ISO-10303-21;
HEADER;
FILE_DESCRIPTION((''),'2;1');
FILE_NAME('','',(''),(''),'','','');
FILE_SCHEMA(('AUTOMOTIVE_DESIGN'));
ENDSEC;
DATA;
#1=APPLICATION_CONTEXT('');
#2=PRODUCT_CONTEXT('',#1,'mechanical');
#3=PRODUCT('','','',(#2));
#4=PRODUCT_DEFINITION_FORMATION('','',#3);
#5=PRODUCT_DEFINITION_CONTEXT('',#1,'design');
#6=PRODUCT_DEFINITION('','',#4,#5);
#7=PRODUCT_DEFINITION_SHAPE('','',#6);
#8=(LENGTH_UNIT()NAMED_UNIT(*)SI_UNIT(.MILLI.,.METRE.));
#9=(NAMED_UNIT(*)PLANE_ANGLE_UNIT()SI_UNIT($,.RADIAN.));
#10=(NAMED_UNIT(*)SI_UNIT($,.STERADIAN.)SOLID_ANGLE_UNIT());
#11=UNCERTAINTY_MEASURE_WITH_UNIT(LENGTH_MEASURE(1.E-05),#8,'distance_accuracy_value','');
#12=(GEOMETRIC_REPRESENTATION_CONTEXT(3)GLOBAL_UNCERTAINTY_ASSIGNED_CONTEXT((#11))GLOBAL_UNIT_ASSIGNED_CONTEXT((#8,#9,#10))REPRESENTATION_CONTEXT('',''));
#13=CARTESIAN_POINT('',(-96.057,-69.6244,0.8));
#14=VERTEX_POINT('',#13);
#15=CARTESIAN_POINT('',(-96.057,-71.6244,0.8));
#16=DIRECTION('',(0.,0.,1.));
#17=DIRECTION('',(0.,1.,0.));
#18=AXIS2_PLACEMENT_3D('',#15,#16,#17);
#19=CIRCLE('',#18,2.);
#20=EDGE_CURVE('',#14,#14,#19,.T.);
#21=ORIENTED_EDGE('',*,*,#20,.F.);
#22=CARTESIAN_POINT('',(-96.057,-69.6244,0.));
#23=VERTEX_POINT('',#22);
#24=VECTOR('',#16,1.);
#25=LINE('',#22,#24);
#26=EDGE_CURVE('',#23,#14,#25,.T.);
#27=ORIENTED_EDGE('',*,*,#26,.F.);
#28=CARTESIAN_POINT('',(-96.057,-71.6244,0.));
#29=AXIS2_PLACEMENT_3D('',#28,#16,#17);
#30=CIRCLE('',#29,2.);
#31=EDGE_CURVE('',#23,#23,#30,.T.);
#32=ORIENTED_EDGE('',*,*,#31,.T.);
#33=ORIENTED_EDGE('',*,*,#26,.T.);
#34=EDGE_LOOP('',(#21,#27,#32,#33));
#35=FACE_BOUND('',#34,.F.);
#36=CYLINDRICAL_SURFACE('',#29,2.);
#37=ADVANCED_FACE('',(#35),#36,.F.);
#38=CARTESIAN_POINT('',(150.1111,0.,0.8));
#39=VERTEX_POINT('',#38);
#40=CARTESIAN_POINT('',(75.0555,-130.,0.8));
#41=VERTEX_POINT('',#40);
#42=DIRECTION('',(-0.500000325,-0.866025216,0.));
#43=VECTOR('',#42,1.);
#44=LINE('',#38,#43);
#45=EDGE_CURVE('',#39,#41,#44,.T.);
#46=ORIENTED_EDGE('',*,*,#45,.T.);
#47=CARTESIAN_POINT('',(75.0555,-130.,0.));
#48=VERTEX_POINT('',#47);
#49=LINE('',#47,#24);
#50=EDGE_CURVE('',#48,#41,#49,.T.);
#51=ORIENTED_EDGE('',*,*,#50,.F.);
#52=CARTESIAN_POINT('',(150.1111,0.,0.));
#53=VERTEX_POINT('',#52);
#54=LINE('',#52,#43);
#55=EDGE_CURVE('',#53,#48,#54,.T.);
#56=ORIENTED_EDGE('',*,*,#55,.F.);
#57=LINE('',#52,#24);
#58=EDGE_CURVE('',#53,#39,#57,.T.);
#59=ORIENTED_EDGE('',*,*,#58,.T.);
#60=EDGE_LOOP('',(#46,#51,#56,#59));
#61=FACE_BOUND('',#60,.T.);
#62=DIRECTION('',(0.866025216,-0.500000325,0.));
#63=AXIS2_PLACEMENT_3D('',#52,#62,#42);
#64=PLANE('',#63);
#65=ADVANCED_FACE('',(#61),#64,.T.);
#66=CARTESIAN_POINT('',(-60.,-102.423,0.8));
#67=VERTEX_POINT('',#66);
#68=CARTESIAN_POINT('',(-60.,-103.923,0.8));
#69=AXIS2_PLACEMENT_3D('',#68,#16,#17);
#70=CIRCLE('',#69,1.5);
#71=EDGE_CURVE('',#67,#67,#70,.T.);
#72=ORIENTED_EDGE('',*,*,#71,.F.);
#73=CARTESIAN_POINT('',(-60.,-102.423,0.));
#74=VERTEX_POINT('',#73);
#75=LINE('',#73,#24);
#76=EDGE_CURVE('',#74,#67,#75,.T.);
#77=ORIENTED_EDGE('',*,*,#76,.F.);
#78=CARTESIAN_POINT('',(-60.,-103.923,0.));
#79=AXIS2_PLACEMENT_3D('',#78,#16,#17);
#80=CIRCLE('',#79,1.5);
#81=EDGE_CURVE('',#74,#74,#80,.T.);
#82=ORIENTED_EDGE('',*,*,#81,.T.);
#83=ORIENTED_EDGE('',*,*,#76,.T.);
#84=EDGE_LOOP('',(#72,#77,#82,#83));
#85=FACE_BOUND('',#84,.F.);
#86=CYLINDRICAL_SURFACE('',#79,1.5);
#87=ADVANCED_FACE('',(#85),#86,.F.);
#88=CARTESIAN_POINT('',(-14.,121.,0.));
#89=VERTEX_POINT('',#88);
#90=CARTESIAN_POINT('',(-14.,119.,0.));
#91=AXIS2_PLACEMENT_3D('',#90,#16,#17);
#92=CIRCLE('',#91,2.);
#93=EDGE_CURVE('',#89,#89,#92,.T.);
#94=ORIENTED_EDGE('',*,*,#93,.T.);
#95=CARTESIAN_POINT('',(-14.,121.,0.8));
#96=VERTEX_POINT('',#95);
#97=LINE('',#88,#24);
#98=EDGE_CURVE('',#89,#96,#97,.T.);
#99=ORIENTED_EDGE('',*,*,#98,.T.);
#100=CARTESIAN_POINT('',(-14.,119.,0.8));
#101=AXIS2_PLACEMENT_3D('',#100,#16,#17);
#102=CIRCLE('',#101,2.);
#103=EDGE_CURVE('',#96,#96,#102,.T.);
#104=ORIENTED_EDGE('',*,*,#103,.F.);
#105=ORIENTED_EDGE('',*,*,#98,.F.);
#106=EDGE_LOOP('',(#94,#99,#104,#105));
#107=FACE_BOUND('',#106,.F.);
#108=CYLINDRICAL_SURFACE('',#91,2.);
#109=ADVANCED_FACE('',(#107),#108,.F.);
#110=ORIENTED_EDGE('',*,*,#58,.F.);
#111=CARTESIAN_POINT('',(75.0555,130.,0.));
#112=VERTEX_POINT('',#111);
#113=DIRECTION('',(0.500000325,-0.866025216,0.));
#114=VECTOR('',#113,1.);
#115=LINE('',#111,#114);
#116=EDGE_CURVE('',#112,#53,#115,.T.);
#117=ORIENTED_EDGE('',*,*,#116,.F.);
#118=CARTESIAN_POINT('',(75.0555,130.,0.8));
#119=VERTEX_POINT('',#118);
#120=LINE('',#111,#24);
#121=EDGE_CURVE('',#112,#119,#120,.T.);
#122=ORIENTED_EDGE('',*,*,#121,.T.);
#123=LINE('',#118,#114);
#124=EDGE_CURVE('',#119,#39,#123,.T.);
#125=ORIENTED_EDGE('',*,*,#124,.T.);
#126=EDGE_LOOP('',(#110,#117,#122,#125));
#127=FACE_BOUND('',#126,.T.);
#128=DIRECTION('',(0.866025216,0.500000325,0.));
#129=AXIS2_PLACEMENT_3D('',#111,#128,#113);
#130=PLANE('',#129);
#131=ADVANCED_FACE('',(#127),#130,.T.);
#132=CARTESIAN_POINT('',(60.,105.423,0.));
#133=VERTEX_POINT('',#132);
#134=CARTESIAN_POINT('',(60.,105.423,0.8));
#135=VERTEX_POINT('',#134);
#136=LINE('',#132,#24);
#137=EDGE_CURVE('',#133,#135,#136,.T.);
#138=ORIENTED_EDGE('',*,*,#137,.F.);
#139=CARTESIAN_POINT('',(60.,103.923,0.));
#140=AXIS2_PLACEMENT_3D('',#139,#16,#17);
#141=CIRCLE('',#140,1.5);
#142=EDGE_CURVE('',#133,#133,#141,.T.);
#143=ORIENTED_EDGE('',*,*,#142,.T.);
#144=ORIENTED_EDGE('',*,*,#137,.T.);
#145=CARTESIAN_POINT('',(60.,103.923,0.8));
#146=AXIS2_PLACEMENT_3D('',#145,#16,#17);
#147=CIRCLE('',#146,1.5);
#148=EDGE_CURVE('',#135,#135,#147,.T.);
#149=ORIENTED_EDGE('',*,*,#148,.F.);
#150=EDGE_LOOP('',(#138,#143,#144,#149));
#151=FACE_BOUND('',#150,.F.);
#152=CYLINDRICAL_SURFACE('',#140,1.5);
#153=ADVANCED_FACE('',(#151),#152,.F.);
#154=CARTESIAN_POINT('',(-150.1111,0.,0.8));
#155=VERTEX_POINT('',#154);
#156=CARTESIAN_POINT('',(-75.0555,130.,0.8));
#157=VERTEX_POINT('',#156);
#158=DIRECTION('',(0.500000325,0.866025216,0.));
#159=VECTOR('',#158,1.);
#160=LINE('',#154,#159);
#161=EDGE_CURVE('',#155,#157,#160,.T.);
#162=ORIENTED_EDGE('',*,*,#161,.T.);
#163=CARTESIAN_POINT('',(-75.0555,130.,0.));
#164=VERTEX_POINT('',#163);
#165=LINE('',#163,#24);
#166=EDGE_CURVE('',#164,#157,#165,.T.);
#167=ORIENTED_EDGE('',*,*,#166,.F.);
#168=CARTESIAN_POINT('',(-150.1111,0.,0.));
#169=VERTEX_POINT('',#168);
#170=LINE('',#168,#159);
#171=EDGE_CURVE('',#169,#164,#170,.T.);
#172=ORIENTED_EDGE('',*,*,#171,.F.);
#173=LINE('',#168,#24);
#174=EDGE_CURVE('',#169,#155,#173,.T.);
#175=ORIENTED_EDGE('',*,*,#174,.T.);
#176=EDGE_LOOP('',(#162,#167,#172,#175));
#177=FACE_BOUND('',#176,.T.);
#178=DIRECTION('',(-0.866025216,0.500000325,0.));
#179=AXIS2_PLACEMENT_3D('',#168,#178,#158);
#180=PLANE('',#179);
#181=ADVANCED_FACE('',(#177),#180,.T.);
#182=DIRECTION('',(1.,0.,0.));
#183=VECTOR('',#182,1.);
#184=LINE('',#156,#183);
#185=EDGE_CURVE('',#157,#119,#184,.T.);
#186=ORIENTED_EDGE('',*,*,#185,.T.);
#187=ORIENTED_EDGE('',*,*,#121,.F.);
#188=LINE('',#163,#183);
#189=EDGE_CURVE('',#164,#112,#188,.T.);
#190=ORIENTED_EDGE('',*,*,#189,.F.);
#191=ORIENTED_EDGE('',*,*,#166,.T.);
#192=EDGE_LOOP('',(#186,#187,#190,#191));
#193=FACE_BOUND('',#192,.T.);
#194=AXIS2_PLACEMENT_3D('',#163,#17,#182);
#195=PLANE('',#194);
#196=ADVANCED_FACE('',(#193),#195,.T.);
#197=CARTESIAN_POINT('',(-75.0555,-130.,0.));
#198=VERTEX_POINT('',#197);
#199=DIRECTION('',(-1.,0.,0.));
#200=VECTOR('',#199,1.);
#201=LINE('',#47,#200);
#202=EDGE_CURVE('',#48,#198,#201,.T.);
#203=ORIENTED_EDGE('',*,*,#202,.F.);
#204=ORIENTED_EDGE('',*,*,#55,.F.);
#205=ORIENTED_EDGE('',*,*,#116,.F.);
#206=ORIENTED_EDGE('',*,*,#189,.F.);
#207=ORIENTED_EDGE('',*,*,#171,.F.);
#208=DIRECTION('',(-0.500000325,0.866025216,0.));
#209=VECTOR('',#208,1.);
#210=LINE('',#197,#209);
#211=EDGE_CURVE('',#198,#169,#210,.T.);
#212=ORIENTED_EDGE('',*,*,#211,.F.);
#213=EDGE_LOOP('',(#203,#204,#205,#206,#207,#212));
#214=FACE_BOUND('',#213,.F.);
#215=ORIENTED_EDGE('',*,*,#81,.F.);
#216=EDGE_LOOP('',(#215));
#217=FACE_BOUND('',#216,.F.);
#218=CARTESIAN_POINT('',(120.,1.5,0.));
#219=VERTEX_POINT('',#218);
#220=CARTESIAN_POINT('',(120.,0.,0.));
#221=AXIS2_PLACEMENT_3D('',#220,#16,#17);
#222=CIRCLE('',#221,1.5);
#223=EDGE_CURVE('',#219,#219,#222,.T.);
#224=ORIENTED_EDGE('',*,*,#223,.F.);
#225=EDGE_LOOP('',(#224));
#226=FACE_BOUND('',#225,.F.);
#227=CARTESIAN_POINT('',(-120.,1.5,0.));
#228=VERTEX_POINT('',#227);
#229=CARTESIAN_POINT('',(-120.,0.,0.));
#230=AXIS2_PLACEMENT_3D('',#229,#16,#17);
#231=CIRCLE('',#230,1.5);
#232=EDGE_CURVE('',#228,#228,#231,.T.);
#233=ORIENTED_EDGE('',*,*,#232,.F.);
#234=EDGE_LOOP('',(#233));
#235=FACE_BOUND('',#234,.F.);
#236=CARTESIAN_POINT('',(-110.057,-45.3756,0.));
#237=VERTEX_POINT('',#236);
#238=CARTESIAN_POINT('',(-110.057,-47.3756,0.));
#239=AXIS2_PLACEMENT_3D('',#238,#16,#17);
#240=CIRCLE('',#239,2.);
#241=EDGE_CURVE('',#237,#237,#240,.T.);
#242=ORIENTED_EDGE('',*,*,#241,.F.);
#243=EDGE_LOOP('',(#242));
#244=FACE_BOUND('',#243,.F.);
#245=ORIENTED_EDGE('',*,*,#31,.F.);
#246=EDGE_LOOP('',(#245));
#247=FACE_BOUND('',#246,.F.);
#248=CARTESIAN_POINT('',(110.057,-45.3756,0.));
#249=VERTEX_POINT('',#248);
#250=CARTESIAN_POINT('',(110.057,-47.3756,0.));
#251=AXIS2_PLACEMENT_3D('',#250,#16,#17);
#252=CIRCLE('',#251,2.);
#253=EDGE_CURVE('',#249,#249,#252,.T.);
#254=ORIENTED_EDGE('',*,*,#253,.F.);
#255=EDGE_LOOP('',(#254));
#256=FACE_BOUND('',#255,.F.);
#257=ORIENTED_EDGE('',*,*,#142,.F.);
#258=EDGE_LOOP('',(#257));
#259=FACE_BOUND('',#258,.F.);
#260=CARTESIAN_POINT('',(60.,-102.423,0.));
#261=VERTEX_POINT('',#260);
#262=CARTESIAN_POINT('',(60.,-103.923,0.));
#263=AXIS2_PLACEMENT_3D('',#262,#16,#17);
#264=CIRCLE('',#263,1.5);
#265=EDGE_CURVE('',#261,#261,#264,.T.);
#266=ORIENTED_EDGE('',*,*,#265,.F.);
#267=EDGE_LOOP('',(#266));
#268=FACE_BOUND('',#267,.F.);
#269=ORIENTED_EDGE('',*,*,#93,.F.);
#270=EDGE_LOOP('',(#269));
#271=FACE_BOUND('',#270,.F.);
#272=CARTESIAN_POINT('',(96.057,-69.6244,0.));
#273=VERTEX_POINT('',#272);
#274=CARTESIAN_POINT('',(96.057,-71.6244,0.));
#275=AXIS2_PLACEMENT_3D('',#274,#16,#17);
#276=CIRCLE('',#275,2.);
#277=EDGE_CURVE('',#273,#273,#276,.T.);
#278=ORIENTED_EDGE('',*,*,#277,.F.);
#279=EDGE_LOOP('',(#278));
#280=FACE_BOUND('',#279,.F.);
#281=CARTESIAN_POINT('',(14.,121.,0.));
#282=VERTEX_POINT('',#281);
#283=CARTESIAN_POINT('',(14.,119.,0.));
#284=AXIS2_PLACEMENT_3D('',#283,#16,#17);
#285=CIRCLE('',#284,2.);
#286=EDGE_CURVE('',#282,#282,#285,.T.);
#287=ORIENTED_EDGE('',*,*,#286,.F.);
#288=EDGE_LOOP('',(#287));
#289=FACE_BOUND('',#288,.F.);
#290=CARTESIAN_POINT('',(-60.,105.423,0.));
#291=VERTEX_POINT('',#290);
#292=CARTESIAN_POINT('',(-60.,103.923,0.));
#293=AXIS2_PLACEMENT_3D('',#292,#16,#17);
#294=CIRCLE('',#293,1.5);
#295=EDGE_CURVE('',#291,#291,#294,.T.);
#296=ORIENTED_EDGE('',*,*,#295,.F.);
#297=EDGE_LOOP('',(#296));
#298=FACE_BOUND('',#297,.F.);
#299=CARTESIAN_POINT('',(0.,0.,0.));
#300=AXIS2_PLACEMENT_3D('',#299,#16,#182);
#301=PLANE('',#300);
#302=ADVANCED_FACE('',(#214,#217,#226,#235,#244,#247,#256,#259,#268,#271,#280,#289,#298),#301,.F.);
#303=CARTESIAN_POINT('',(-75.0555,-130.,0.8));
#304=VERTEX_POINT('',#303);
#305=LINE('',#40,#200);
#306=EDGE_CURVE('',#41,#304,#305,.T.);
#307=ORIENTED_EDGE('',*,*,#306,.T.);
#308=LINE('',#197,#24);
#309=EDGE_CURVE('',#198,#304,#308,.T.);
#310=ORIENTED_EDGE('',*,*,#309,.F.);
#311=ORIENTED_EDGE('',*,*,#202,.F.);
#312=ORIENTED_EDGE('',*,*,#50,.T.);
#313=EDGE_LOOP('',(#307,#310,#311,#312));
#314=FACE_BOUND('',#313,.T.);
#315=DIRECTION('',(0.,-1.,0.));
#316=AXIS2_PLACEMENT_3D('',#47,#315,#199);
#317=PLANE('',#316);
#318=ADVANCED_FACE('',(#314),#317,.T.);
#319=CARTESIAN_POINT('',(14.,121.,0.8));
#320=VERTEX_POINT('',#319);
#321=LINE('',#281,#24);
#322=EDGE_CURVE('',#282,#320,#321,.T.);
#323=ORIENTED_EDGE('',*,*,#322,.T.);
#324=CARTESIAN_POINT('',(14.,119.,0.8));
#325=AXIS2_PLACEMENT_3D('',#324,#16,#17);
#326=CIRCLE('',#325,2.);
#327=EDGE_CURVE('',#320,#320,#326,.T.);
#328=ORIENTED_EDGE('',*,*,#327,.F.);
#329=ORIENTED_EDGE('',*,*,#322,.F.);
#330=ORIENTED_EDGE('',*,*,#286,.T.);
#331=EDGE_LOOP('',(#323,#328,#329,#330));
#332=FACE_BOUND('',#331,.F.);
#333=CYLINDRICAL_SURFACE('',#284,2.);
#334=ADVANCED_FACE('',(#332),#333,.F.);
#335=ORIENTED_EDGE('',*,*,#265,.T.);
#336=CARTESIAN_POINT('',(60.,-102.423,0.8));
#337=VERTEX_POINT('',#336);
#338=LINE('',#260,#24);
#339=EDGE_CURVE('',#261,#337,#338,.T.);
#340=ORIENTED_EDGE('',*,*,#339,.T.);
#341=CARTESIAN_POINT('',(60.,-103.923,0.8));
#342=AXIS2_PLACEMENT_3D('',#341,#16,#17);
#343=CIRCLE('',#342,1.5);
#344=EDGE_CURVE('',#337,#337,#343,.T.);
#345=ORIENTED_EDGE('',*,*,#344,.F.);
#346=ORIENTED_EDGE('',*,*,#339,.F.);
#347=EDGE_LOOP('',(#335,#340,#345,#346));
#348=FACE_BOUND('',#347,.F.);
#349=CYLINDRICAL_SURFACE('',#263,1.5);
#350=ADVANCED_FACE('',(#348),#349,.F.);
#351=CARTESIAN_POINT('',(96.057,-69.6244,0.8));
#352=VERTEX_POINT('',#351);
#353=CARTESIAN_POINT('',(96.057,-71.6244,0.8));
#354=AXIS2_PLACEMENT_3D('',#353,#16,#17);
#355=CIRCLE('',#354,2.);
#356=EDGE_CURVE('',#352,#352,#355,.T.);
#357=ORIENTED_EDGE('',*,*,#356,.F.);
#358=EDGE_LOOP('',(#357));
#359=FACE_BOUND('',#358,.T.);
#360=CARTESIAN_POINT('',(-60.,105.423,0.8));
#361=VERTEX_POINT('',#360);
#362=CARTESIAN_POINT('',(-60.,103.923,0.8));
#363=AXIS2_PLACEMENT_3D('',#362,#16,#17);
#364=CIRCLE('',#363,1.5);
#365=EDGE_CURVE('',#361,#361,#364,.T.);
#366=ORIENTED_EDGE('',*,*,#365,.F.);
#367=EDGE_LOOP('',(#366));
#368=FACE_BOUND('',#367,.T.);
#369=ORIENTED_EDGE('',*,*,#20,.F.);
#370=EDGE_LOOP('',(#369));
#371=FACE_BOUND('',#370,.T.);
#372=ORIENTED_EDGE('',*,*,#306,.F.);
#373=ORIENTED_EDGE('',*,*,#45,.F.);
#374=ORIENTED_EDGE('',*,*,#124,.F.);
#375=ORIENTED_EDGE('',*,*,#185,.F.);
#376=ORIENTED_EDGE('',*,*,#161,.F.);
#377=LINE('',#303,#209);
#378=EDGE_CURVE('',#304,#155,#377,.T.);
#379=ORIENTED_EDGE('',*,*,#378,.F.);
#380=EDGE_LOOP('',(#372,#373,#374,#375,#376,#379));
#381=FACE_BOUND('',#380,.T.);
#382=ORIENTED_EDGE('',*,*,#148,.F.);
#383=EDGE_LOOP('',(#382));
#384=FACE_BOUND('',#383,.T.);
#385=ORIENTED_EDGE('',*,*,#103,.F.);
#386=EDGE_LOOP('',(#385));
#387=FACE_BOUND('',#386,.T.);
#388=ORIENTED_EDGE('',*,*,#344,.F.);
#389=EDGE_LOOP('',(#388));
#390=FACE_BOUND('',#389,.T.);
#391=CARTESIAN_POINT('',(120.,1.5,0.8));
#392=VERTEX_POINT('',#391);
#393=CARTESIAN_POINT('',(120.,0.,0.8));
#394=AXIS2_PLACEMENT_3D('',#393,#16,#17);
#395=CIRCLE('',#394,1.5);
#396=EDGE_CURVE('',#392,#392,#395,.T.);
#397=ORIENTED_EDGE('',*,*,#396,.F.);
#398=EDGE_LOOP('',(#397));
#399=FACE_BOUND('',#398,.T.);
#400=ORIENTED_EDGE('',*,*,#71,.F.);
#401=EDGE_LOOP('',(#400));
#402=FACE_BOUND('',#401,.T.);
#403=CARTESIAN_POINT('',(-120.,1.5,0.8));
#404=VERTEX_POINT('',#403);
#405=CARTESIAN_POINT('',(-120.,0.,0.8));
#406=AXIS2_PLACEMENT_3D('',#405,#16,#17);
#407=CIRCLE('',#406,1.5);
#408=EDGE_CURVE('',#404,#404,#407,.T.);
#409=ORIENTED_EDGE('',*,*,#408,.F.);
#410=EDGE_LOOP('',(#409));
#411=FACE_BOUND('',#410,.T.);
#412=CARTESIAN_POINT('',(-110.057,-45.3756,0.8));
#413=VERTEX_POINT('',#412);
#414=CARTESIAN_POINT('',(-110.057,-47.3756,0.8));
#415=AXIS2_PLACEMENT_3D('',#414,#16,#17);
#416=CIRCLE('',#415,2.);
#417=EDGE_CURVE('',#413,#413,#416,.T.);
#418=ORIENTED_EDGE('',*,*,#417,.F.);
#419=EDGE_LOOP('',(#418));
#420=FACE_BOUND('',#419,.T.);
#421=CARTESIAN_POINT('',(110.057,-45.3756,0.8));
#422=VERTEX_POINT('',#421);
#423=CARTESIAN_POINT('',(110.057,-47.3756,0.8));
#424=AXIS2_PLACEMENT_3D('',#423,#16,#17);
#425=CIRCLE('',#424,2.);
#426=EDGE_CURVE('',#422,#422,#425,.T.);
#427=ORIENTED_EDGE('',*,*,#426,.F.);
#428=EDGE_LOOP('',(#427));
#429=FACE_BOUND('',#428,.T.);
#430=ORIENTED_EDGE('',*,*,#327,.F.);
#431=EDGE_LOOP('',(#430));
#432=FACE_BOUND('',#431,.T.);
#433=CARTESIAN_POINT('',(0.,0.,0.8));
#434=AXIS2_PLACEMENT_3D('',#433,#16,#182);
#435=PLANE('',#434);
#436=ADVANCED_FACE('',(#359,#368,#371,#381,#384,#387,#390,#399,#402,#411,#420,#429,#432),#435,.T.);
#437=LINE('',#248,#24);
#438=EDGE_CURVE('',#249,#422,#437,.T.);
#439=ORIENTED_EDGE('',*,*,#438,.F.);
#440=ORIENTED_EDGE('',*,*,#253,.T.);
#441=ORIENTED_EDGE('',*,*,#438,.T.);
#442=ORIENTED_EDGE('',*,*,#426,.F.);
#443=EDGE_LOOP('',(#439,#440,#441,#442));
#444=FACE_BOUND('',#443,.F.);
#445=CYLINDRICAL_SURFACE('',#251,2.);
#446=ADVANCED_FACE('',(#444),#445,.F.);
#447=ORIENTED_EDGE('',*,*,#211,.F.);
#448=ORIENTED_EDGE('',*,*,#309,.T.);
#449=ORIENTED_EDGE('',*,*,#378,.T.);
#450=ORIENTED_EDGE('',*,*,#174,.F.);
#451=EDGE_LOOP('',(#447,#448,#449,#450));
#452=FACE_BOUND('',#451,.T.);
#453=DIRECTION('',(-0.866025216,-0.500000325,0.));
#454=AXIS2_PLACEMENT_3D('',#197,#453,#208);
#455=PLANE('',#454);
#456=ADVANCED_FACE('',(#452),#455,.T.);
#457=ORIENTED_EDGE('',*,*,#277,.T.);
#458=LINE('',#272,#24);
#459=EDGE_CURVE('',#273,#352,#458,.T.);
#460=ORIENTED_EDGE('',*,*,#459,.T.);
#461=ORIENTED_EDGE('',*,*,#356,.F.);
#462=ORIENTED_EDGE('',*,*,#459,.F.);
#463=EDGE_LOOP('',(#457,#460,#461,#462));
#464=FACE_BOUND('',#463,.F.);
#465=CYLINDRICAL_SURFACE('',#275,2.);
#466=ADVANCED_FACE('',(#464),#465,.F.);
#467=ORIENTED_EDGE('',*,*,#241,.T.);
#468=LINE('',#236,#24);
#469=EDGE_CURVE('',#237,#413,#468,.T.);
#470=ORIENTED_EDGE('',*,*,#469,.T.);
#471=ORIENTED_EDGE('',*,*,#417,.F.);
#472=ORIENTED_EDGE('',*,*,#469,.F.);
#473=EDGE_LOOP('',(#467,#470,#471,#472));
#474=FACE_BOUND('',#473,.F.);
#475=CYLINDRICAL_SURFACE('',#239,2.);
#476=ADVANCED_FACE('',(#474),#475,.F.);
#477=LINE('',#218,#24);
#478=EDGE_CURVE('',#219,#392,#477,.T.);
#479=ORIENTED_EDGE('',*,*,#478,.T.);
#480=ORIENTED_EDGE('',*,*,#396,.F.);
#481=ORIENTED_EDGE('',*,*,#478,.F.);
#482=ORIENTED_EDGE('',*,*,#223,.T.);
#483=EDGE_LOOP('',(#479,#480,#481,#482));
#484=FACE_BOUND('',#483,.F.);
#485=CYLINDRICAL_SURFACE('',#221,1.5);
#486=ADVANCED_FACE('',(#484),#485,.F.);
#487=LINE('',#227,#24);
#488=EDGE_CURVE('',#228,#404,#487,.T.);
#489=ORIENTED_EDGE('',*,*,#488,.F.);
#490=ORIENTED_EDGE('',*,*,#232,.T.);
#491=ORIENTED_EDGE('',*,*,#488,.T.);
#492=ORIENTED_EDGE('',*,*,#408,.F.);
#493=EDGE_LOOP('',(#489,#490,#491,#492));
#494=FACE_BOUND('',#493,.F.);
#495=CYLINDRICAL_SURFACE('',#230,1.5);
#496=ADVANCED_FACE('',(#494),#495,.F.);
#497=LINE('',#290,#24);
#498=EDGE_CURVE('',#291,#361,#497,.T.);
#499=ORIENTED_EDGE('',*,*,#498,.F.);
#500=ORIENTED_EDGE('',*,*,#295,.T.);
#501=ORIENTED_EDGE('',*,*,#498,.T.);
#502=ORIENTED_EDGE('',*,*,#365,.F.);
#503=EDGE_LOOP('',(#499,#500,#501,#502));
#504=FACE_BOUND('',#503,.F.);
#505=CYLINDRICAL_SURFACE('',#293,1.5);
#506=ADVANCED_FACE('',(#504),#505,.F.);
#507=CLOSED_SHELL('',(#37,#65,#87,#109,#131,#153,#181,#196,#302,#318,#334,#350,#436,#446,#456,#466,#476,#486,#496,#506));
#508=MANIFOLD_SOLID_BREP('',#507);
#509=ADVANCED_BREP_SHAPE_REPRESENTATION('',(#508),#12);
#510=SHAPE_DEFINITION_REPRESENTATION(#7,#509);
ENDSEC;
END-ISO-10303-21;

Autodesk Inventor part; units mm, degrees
ref_plane "YZ Plane" through (0, 0, 0) normal (1, 0, 0) x (0, 1, 0)
ref_plane "XZ Plane" through (0, 0, 0) normal (0, 1, 0) x (-1, 0, 0)
ref_plane "XY Plane" through (0, 0, 0) normal (0, 0, 1) x (1, 0, 0)
sketch "Szkic1" plane through (0, 0, 0) normal (0, 0, 1) x (1, 0, 0)
  line L0 (75.0555, 130) -> (150.1111, 0)
  line L1 (150.1111, 0) -> (75.0555, -130)
  line L2 (75.0555, -130) -> (-75.0555, -130)
  line L3 (-75.0555, -130) -> (-150.1111, 0)
  line L4 (-150.1111, 0) -> (-75.0555, 130)
  line L5 (-75.0555, 130) -> (75.0555, 130)
  point P0 (0, 0)
  point P1 (0, 0)
  dimension "d0" = 130
extrude "Płyta1" add sketch "Szkic1" along normal blind 0.8
ref_plane "Płaszczyzna konstrukcyjna2" through (112.5833, 65, 0.8) normal (-0.5, 0.8660254, 0) x (0, 0, -1)
ref_plane "Płaszczyzna konstrukcyjna3" through (-112.5833, 65, 0) normal (0.5, 0.8660254, 0) x (0, 0, 1)
sketch "Szkic22" plane through (0, 0, 0) normal (0, 0, -1) x (-1, 0, 0)
  circle A0 centre (-120, 0) radius 1.5 projected
  point P0 (0, 0)
  point P1 (-60, -103.923)
  point P2 (60, -103.923)
  point P3 (120, 0)
  point P4 (60, 103.923)
  point P5 (-60, 103.923)
  dimension "d132" = 360
hole "Otwór7" at (120, 0, 0) at (60, -103.923, 0) at (-60, -103.923, 0) at (-120, 0, 0) at (-60, 103.923, 0) at (60, 103.923, 0) direction (0, 0, 1) diameter 3 depth 0.8 tip angle 118
sketch "Szkic23" plane through (0, 0, 0) normal (0, 0, -1) x (-1, 0, 0)
  circle A0 centre (-96.057, -71.6244) radius 2 projected
  circle A1 centre (-110.057, -47.3756) radius 2 projected
  line L0 (-106.6109, -41.3446) -> (-89.1109, -71.6554) projected
  line L1 (-89.1109, -71.6554) -> (-99.5032, -77.6554) projected
  line L2 (-117.0032, -47.3446) -> (-99.5032, -77.6554) projected
  line L3 (-106.6109, -41.3446) -> (-117.0032, -47.3446) projected
  circle A2 centre (110.057, -47.3756) radius 2 projected
  circle A3 centre (96.057, -71.6244) radius 2 projected
  line L4 (89.1109, -71.6554) -> (106.6109, -41.3446) projected
  line L5 (106.6109, -41.3446) -> (117.0032, -47.3446) projected
  line L6 (99.5032, -77.6554) -> (117.0032, -47.3446) projected
  line L7 (89.1109, -71.6554) -> (99.5032, -77.6554) projected
  circle A4 centre (-14, 119) radius 2 projected
  circle A5 centre (14, 119) radius 2 projected
  line L8 (17.5, 113) -> (-17.5, 113) projected
  line L9 (-17.5, 113) -> (-17.5, 125) projected
  line L10 (17.5, 125) -> (-17.5, 125) projected
  line L11 (17.5, 113) -> (17.5, 125) projected
  point P0 (0, 0)
hole "Otwór8" at (-96.057, -71.6244, 0) at (-110.057, -47.3756, 0) at (-14, 119, 0) at (14, 119, 0) at (110.057, -47.3756, 0) at (96.057, -71.6244, 0) direction (0, 0, 1) diameter 4 depth 0.8 tip angle 118
equation "\"d139\" = Grubość"
equation "\"d146\" = Grubość"
equation "\"PromieńGięcia\" = Grubość"
equation "\"SzerokośćGięciaPodcięcia\" = Grubość"
equation "\"GłębokośćGięciaPodcięcia\" = 0.5 * Grubość"
equation "\"RozmiarPodcięciaNarożnika\" = 4 * Grubość"
equation "\"MinimalnaPozostałość\" = 2 * Grubość"
equation "\"PromieńPrzejścia\" = PromieńGięcia"
equation "\"Rozmiar_promienia_Jacobiego\" = Grubość"
equation "\"Wielk_odstępu\" = Grubość"
equation "\"d1\" = PromieńGięcia"
equation "\"Grubość\" = 0.8"
properties part number "base_bottom"
